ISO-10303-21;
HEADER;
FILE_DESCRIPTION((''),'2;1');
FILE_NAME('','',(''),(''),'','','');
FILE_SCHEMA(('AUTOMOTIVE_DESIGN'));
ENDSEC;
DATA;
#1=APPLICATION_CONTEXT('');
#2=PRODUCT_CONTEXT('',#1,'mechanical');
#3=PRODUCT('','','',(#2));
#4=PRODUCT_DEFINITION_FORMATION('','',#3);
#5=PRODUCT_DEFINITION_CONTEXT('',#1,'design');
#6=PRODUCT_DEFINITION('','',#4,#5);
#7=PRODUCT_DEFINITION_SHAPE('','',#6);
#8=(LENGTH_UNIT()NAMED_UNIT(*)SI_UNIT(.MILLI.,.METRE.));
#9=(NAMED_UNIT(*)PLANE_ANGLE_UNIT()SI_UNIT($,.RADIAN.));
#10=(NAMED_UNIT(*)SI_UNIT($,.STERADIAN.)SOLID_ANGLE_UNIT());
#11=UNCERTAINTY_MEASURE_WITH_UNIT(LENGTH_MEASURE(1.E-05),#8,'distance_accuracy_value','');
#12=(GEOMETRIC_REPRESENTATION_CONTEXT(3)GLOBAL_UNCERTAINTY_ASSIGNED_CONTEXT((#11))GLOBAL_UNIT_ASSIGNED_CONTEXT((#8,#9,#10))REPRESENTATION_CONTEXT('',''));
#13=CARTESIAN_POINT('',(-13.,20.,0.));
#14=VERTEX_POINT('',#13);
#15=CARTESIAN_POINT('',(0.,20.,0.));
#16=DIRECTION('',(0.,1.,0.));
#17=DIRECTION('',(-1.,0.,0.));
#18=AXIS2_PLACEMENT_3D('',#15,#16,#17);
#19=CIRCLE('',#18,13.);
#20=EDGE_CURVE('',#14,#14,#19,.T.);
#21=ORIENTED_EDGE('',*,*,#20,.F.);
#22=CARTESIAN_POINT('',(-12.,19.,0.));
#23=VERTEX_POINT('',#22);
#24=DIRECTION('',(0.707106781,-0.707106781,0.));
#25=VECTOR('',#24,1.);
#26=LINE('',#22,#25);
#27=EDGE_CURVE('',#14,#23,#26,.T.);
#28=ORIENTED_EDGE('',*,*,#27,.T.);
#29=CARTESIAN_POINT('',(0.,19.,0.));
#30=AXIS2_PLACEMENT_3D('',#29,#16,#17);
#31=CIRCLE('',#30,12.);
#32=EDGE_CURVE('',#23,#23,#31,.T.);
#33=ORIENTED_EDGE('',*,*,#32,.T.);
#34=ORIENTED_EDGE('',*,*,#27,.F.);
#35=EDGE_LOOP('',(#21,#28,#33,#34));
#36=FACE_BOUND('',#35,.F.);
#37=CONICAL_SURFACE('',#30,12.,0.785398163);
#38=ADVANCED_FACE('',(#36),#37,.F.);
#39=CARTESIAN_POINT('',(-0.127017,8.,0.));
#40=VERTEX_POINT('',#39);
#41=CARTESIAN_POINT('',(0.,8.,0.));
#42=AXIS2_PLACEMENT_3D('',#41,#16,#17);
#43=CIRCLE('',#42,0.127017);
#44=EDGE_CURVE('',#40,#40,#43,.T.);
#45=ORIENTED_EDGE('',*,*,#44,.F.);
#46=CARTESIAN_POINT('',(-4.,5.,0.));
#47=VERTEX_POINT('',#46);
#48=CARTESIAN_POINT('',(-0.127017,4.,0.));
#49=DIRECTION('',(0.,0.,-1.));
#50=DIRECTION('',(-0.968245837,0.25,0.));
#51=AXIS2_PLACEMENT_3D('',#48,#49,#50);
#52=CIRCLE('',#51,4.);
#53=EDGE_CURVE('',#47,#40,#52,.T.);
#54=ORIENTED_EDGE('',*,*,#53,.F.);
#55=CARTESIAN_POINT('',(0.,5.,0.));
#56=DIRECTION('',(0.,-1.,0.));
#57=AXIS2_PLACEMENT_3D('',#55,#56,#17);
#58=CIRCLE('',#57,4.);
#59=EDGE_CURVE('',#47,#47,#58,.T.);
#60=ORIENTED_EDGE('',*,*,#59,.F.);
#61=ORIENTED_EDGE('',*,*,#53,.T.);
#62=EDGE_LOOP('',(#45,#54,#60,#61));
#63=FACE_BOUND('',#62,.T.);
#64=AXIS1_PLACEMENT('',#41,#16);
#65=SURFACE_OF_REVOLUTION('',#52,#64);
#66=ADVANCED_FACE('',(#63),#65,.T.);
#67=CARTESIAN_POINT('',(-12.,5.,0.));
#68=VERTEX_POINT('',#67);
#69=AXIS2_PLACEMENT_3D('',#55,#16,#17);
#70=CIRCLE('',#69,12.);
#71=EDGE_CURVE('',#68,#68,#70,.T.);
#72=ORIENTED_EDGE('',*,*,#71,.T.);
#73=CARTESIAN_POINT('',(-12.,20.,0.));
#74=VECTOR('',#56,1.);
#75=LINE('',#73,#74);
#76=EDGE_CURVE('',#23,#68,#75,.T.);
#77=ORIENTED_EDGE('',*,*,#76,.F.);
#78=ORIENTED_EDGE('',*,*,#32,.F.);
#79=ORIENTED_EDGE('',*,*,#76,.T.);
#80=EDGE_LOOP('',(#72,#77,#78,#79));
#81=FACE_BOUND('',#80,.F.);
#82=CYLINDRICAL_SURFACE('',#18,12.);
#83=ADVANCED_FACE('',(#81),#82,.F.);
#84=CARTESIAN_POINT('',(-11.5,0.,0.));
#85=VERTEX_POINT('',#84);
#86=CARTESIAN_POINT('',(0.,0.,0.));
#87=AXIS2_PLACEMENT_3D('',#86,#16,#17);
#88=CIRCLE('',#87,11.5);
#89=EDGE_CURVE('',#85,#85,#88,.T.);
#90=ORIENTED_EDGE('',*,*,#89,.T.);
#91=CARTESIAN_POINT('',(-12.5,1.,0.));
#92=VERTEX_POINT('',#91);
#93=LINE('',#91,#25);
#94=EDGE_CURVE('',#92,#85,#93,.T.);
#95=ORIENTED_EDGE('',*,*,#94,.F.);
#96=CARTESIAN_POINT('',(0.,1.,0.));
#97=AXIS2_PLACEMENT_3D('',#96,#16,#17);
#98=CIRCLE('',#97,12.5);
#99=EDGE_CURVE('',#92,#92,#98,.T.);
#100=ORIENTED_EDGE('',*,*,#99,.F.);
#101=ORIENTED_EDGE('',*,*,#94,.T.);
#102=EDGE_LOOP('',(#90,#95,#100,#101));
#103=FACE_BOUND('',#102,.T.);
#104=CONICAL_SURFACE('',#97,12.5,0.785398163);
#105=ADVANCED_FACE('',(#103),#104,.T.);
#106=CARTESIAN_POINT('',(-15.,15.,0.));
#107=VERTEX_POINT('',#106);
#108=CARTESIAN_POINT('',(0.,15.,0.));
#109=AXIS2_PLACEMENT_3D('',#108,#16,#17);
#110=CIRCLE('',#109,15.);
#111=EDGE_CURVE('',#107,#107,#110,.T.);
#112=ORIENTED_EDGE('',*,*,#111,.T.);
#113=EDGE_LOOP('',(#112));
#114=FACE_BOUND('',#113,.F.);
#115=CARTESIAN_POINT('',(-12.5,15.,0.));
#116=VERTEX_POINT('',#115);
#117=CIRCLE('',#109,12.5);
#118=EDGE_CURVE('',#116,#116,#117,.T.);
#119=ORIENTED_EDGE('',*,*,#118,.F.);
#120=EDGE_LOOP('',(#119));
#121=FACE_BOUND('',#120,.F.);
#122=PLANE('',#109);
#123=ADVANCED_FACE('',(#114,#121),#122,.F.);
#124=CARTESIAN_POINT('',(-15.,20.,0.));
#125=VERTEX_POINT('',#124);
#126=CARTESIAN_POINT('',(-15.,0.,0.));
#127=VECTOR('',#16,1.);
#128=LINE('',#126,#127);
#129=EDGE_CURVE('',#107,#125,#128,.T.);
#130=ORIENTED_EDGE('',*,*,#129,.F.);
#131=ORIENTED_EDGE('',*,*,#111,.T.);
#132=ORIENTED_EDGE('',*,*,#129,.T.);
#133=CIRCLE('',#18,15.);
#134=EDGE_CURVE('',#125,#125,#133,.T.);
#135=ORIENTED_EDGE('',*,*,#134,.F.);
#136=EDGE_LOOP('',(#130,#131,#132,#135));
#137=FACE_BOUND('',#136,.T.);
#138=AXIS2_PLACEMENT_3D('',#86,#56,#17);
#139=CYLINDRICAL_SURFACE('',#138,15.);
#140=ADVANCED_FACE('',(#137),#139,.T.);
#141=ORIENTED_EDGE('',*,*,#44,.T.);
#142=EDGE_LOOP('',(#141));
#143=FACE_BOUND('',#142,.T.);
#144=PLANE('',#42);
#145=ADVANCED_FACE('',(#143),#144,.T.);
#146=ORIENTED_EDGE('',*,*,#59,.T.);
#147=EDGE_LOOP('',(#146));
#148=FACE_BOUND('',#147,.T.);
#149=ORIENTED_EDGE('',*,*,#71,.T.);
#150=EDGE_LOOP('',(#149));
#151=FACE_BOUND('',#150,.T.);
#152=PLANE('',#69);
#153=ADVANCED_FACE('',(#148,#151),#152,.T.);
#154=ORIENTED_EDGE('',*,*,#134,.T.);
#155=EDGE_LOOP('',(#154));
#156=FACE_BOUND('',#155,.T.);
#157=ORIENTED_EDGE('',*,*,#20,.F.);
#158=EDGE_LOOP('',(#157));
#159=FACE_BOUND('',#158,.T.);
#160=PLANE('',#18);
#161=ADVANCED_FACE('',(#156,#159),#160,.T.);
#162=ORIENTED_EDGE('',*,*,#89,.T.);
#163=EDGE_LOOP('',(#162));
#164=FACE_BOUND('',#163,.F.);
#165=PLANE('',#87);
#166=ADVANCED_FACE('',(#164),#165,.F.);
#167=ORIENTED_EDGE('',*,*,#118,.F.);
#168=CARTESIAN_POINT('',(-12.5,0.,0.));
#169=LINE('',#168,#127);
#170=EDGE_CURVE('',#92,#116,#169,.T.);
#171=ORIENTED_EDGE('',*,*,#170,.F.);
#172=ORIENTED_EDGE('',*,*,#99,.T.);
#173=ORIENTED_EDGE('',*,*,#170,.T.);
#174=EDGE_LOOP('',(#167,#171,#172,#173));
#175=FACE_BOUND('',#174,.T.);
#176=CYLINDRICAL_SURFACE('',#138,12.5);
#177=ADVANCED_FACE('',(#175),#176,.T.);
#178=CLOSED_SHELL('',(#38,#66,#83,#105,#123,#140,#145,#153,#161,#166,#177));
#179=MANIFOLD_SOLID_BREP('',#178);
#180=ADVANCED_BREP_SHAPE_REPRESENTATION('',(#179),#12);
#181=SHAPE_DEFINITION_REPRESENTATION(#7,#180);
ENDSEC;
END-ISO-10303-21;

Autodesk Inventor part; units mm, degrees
ref_plane "YZ Plane" through (0, 0, 0) normal (1, 0, 0) x (0, 1, 0)
ref_plane "XZ Plane" through (0, 0, 0) normal (0, 1, 0) x (-1, 0, 0)
ref_plane "XY Plane" through (0, 0, 0) normal (0, 0, 1) x (1, 0, 0)
sketch "Szkic1" plane through (0, 0, 0) normal (0, 1, 0) x (-1, 0, 0)
  circle A0 centre (0, 0) radius 15
  circle A1 centre (0, 0) radius 12
  circle A2 centre (0, 0) radius 12.5
  circle A3 centre (0, 0) radius 4
  dimension "d0" = 30
  dimension "d1" = 24
  dimension "d2" = 25
  dimension "d12" = 8
extrude "Wyciągnięcie proste1" add sketch "Szkic1" along normal blind 20 contours A0 | A1 | A2 | A3
extrude "Wyciągnięcie proste2" cut sketch "Szkic1" against normal blind 15 from surface at 20 contours A1 | A3
extrude "Wyciągnięcie proste3" cut sketch "Szkic1" along normal blind 15 contours A0
chamfer "Faza1" distance 1 angle 45 2 edges at (12.5, 0, 0) (12, 20, 0)
extrude "Wyciągnięcie proste4" add sketch "Szkic1" along normal blind 8 contours A3
fillet "Zaokrąglenie1" radius 4 1 edges at (4, 8, 0)
properties part number "Z_screw_lower_end" material "Tworzywo sztuczne ABS"
